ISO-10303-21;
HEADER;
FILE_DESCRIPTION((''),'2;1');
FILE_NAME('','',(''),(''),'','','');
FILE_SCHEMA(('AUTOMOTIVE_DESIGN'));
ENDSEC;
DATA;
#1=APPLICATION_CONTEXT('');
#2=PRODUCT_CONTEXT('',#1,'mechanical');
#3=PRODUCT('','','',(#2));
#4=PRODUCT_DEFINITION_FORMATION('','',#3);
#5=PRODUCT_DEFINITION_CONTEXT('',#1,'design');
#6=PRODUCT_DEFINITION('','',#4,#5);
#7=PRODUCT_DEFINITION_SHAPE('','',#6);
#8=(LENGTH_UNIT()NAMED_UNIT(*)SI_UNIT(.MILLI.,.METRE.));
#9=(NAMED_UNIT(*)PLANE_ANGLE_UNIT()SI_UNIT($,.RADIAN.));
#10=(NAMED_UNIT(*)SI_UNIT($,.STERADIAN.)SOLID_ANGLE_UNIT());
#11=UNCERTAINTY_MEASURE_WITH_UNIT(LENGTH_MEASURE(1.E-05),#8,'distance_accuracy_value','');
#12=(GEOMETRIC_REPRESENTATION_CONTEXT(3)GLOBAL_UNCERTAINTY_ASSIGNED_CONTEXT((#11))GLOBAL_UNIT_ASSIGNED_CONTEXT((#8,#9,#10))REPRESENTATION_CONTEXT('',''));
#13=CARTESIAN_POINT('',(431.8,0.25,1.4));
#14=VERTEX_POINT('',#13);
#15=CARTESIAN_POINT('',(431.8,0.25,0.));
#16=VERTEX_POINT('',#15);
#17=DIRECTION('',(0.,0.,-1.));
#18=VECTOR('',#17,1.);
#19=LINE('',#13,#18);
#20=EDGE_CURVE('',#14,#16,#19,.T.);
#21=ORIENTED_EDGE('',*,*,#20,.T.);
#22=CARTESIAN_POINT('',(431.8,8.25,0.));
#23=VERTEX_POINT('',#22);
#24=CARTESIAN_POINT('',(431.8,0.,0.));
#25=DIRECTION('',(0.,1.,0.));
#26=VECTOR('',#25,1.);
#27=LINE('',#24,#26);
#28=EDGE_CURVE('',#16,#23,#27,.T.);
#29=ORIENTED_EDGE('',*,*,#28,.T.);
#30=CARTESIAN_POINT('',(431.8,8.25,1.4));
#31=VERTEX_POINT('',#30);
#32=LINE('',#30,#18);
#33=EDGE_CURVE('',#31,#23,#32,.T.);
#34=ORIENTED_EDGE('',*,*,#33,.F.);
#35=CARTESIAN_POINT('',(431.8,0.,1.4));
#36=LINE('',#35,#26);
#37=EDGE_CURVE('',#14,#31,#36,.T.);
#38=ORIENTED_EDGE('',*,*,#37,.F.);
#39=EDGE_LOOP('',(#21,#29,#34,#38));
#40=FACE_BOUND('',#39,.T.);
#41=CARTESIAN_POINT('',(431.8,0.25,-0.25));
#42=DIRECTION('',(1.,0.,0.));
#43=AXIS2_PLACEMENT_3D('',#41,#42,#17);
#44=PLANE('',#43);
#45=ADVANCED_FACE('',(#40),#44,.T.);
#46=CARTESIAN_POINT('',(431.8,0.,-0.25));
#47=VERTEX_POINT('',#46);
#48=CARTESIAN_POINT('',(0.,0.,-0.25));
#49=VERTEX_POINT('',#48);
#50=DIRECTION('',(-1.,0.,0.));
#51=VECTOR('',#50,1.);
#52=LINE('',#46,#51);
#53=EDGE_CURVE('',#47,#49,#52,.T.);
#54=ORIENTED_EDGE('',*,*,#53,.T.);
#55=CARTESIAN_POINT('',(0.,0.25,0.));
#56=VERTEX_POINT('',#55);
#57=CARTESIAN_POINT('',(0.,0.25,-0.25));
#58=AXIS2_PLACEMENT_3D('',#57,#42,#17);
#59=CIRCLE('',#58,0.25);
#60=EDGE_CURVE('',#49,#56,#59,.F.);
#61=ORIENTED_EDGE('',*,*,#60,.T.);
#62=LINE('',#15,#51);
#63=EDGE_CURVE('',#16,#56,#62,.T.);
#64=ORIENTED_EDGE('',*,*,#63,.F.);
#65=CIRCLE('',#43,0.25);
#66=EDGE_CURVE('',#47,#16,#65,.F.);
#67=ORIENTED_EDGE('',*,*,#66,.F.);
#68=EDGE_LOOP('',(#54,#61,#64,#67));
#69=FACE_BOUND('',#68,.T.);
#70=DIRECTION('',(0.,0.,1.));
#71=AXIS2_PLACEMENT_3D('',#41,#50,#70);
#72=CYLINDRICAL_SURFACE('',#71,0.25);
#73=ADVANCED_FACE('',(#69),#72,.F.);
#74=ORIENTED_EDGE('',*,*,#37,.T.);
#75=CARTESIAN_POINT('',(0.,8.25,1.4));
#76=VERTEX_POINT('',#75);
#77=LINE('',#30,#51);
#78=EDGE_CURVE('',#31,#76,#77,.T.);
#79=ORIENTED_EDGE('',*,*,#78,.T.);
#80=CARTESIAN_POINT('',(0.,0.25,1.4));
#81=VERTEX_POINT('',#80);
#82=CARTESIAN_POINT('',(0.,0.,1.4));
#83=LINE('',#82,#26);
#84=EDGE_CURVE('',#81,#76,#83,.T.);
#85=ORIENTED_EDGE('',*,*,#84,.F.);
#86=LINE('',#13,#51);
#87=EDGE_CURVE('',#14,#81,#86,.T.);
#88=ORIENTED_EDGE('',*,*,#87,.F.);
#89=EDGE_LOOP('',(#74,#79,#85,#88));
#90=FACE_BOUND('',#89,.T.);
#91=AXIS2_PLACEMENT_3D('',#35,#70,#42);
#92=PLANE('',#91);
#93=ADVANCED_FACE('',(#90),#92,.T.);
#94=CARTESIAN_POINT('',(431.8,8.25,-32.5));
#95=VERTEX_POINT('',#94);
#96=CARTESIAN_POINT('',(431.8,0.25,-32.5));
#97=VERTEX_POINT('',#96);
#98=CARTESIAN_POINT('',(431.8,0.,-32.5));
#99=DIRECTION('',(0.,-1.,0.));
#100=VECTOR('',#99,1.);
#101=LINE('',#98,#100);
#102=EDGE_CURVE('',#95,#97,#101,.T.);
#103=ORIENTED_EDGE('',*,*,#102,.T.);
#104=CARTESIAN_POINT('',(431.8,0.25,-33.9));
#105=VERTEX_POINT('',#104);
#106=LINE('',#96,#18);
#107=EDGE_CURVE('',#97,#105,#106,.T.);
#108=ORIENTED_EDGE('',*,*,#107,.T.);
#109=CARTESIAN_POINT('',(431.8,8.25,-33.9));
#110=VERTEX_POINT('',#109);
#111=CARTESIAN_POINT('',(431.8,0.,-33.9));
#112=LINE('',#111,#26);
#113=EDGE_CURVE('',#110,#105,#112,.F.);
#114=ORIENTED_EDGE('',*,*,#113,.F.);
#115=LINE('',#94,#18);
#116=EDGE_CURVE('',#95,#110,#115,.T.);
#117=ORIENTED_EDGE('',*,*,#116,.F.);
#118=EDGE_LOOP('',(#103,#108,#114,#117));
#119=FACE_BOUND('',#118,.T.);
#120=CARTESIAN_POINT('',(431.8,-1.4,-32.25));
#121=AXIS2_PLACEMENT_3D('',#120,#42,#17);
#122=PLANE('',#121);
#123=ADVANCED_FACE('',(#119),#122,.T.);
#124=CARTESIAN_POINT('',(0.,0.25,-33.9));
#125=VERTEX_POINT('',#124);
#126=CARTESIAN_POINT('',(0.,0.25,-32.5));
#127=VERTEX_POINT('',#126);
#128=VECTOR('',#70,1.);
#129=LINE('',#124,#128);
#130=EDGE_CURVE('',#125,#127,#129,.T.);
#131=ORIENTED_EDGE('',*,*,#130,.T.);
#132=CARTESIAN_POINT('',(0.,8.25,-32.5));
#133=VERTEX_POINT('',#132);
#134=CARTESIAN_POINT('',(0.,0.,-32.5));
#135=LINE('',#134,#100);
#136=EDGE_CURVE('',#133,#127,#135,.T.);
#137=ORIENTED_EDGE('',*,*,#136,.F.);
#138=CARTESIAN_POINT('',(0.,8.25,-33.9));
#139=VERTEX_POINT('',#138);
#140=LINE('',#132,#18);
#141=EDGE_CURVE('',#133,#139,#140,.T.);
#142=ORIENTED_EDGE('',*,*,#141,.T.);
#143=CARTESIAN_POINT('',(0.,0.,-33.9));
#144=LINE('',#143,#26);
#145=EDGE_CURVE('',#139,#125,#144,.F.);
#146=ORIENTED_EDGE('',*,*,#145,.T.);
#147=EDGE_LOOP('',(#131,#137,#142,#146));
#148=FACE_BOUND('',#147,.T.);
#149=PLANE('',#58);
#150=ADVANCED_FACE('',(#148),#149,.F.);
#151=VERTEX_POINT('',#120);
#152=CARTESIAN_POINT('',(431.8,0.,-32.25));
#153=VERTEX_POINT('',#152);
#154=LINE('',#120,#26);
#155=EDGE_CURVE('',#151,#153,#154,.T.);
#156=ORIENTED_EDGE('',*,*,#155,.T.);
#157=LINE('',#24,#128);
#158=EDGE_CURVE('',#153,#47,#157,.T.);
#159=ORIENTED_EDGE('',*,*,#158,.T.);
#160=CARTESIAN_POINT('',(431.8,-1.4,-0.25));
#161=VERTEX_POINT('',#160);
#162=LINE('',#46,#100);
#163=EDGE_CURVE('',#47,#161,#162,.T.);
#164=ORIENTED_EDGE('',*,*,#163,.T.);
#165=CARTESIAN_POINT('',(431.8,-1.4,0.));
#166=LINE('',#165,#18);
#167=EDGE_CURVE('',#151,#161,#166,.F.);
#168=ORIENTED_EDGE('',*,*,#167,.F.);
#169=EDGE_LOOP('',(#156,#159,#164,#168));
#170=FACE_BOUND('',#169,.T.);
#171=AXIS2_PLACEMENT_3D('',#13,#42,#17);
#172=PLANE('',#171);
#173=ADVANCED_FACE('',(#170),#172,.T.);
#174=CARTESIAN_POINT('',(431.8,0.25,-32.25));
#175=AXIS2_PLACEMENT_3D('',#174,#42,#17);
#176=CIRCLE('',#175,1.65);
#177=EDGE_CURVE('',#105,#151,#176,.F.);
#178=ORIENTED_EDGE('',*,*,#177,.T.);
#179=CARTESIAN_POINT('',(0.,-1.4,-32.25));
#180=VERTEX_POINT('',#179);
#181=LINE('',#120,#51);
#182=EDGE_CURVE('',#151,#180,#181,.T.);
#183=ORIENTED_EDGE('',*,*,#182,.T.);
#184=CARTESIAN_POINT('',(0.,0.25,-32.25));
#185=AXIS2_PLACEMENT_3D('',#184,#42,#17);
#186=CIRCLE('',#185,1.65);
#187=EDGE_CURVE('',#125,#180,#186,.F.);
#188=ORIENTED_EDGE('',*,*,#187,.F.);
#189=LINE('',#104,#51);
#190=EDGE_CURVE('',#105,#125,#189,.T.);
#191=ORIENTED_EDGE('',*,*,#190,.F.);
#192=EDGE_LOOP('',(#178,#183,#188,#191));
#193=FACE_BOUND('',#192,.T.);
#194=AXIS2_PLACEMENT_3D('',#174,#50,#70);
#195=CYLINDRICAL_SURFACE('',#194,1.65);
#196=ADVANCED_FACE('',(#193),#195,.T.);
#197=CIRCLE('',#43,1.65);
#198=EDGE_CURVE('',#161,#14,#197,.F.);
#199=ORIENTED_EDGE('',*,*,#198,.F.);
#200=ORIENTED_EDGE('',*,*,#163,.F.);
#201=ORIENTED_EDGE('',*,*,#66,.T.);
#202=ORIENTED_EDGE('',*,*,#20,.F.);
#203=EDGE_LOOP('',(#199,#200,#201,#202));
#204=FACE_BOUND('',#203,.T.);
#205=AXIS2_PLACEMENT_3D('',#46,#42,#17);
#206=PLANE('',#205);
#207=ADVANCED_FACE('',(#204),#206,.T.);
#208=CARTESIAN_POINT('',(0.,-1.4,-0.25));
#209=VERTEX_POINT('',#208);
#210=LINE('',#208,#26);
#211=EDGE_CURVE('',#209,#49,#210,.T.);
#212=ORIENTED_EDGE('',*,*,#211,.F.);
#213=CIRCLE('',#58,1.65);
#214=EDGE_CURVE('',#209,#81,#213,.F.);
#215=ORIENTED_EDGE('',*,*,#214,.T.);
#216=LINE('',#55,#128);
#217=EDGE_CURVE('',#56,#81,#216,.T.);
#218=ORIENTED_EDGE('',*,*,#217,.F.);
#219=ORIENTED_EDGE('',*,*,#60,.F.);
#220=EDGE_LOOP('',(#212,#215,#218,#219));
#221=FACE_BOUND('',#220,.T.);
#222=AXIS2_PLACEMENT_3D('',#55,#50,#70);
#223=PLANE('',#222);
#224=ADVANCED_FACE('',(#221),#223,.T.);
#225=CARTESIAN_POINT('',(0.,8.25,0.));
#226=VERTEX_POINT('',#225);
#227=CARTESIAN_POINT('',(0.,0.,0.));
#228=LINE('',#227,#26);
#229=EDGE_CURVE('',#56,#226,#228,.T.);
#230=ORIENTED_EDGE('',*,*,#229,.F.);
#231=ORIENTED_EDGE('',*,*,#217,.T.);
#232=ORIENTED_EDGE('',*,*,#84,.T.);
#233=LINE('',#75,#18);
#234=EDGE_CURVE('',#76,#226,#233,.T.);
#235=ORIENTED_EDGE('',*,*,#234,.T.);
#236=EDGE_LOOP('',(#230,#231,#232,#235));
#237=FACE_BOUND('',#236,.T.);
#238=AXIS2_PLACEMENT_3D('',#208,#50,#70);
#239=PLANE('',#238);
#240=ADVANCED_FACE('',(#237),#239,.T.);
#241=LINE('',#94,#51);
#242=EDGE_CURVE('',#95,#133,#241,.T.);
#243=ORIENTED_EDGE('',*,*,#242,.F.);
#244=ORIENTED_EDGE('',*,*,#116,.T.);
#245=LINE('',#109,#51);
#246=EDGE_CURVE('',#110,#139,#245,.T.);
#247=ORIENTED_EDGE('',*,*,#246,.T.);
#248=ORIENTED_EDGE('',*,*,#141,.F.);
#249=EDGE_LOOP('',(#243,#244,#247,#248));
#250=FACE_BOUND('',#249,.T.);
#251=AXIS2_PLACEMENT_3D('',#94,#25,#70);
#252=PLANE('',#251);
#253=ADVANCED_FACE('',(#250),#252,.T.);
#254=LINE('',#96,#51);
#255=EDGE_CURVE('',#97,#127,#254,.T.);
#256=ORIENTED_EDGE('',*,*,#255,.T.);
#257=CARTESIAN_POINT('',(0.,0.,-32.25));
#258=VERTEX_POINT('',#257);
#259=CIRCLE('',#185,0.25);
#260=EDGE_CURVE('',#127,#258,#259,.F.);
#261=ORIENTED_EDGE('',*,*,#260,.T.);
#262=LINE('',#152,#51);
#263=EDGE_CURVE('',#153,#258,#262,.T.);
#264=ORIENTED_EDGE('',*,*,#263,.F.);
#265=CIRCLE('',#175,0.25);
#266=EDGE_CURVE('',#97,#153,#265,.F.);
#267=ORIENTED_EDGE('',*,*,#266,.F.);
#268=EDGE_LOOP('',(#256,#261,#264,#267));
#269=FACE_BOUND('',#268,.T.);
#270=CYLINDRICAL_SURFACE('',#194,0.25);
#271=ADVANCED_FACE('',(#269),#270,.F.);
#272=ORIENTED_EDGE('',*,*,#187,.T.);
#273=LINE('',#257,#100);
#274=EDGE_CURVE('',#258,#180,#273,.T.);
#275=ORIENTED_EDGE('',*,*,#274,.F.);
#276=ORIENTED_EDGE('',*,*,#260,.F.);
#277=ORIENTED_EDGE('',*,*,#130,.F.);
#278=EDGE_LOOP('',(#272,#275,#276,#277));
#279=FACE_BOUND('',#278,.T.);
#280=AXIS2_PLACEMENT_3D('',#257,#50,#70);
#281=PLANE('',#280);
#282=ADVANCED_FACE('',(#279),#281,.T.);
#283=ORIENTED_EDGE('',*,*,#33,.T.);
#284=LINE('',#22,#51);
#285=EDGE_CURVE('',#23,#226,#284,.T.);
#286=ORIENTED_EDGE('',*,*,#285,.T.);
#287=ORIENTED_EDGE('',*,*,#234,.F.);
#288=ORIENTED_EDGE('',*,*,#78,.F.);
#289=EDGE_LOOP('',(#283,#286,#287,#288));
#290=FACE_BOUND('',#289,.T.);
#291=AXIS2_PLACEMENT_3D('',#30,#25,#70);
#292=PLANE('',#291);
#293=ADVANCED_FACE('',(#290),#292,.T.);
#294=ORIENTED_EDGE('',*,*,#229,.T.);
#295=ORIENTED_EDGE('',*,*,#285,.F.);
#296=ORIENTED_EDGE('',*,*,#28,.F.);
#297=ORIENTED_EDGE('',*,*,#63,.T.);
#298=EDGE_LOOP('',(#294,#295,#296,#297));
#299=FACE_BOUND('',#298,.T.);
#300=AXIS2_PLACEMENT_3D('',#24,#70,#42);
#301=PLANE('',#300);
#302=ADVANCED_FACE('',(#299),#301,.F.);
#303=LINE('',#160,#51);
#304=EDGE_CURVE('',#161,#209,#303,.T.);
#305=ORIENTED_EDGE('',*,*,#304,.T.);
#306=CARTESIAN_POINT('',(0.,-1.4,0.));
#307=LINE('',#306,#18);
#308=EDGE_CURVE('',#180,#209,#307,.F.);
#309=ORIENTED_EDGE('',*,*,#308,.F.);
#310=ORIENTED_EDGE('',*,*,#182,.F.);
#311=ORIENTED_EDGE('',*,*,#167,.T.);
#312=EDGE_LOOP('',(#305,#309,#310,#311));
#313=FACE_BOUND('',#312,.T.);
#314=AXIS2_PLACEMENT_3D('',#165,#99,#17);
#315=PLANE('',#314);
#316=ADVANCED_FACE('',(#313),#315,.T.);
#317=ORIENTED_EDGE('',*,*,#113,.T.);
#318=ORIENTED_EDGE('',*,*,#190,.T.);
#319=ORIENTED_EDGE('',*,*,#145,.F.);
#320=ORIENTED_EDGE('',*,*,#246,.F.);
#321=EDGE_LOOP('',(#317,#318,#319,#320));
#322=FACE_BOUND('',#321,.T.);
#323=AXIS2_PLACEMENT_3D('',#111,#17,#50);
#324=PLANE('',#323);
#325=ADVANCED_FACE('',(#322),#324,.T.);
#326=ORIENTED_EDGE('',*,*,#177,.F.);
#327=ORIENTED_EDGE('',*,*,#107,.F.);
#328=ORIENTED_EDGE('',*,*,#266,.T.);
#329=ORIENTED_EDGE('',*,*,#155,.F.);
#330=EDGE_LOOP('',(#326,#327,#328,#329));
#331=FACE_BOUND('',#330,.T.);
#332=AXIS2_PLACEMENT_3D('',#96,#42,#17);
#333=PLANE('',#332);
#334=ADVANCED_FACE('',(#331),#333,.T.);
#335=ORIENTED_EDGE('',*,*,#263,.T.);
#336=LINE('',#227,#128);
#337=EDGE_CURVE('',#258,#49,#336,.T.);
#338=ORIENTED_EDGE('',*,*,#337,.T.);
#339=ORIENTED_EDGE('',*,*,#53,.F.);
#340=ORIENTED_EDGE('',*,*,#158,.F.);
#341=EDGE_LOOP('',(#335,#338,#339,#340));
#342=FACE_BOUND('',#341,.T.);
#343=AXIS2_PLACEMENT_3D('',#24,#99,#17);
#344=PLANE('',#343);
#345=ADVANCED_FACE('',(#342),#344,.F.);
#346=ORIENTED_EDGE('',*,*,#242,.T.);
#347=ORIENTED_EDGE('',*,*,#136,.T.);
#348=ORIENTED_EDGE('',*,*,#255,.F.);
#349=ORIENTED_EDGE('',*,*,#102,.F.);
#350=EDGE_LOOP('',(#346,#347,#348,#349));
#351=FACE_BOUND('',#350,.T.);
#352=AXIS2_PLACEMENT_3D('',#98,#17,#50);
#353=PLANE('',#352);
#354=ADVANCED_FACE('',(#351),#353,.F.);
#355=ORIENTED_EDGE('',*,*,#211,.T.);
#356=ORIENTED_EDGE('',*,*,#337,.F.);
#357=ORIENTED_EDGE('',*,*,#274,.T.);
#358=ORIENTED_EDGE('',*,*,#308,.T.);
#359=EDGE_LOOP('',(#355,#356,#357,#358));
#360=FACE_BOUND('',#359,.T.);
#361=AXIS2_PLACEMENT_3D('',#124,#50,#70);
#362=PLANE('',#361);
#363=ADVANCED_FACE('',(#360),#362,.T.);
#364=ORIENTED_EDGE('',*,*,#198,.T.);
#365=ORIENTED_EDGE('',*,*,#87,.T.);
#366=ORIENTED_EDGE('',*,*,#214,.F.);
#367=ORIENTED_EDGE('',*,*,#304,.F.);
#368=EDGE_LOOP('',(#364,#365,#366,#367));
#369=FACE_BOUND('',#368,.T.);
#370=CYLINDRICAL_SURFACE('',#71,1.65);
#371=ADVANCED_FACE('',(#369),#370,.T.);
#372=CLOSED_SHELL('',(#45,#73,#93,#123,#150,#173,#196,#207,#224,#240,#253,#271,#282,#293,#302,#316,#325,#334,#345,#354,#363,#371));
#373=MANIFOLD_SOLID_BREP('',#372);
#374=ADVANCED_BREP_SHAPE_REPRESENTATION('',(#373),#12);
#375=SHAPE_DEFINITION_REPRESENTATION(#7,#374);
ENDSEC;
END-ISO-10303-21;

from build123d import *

# Parameters (mm, degrees)
BASE_FLANGE1_DEPTH = 431.8


# Sheet-metal steps are written as plain solids
with BuildPart() as part:
    # Sketch1 → Base-Flange1 (new body)
    with BuildSketch(Plane(origin=(0, 0, 0), x_dir=(0, 0, -1), z_dir=(1, 0, 0))):
        with BuildLine():
            Line((0, 8.25), (0, 0.25))
            ThreePointArc((0, 0.25), (0.073223305, 0.073223305), (0.25, 0))
            Line((0.25, 0), (32.25, 0))
            ThreePointArc((32.25, 0), (32.426776695, 0.073223305), (32.5, 0.25))
            Line((32.5, 0.25), (32.5, 8.25))
            Line((32.5, 8.25), (33.9, 8.25))
            Line((33.9, 8.25), (33.9, 0.25))
            ThreePointArc((33.9, 0.25), (33.416726189, -0.916726189), (32.25, -1.4))
            Line((32.25, -1.4), (0.25, -1.4))
            ThreePointArc((0.25, -1.4), (-0.916726189, -0.916726189), (-1.4, 0.25))
            Line((-1.4, 0.25), (-1.4, 8.25))
            Line((-1.4, 8.25), (0, 8.25))
        make_face()
    extrude(amount=BASE_FLANGE1_DEPTH)


solid = part.part
